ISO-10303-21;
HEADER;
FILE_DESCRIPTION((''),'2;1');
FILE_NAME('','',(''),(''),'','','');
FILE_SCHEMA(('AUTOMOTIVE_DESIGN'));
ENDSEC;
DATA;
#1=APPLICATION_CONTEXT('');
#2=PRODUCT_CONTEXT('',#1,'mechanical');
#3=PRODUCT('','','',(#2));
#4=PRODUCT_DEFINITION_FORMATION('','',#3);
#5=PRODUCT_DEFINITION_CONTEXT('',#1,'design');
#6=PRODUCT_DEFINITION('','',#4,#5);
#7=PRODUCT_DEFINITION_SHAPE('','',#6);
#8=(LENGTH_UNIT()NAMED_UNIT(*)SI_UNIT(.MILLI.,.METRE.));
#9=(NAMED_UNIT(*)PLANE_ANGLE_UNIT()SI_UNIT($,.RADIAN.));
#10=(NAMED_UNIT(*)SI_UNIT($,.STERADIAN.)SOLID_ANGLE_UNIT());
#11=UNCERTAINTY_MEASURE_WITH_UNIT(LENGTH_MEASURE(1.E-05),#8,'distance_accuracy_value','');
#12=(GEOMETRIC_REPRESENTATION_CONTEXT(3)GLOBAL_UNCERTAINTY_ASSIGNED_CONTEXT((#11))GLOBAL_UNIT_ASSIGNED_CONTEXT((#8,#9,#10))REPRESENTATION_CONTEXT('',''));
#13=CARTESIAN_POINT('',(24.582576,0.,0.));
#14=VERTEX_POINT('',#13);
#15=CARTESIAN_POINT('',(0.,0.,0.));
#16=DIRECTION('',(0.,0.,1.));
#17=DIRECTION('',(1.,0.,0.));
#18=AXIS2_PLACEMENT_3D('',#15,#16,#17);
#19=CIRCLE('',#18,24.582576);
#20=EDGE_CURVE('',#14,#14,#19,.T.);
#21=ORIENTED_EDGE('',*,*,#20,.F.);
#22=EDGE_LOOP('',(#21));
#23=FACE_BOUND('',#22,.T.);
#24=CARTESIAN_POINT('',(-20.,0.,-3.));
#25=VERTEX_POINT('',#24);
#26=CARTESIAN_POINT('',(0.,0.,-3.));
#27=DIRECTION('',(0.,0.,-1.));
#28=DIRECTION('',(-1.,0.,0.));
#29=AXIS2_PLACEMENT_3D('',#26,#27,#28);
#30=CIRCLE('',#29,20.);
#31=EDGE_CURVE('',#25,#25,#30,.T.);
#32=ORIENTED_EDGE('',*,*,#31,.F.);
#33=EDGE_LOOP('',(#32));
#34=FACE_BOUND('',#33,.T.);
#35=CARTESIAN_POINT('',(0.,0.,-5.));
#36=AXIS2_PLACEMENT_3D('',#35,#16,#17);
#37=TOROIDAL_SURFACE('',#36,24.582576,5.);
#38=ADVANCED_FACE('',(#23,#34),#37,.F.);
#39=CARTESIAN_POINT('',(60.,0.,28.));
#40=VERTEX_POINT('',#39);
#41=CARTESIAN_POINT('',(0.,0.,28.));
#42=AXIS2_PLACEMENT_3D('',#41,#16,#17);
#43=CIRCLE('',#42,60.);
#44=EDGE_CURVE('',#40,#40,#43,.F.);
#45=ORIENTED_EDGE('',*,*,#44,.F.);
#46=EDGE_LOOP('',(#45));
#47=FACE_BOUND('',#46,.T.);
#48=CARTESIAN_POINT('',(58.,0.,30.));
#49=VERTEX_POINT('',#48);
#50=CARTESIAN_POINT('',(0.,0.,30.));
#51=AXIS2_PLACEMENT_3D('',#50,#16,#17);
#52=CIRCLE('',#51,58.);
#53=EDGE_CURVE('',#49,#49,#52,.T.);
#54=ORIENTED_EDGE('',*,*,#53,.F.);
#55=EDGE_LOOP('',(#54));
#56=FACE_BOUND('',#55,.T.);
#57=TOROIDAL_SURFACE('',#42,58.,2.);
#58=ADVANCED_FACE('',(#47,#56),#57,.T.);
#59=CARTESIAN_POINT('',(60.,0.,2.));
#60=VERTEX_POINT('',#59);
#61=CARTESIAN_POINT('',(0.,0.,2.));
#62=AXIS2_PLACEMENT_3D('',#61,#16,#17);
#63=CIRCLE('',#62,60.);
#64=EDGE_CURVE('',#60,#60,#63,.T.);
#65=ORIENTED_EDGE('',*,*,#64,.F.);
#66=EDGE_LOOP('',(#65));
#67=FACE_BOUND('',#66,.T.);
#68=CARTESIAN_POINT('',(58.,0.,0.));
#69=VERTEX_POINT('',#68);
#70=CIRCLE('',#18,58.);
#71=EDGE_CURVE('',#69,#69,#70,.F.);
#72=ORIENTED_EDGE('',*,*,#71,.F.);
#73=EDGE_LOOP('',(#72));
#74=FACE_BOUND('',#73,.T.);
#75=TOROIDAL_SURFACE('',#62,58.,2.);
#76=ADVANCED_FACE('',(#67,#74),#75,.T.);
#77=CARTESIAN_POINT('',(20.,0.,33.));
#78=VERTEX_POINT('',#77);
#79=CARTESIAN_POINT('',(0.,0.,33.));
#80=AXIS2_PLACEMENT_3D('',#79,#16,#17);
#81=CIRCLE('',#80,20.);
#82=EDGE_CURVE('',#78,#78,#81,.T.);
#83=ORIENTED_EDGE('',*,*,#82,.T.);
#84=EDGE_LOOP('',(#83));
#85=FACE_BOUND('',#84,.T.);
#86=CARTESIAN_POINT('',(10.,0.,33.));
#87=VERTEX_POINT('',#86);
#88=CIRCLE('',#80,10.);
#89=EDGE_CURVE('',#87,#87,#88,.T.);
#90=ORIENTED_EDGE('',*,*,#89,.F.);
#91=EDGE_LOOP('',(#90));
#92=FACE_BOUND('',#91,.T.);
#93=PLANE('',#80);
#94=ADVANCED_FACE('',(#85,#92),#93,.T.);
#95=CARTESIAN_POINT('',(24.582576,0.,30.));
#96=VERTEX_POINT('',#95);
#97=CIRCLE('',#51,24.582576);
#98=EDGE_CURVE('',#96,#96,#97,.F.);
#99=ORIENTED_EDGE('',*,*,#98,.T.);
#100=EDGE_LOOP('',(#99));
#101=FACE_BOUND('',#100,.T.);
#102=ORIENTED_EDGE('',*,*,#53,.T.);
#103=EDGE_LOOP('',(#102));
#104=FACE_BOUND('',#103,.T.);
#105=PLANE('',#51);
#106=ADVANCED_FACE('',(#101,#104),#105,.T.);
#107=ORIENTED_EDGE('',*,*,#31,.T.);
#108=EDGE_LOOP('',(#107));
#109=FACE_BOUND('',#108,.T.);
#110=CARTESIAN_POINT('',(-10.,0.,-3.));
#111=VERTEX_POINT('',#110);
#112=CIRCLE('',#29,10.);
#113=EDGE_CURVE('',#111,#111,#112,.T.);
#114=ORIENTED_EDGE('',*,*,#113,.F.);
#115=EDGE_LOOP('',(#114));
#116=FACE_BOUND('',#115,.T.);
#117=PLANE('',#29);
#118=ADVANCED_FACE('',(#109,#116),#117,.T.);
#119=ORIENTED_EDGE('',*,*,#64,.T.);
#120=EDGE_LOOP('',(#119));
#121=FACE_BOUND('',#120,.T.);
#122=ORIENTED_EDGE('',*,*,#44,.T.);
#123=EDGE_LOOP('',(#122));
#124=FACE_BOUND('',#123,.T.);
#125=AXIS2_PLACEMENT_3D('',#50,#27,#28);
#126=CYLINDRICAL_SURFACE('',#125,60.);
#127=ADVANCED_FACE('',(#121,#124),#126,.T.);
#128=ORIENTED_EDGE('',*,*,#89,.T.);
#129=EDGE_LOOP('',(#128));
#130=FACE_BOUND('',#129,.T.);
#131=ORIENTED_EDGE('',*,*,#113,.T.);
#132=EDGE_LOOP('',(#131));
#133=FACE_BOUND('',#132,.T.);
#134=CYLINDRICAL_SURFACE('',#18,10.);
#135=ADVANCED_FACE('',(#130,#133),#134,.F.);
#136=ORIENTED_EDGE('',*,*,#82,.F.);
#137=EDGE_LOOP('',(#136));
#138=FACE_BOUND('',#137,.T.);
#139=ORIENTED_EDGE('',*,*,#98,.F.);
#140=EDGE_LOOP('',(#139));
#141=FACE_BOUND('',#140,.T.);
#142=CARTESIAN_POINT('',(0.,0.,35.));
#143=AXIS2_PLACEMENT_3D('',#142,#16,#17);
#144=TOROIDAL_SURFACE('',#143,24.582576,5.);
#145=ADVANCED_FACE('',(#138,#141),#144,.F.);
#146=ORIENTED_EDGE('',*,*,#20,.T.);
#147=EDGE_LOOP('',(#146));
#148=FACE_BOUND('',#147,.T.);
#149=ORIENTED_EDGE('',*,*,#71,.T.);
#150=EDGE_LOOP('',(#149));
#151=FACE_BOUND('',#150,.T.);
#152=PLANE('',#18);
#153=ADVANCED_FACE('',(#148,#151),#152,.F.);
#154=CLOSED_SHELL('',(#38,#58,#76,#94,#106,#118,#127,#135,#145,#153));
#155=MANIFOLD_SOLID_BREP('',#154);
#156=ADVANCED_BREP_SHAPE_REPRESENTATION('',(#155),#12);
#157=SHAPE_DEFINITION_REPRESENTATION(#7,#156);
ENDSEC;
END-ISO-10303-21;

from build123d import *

# Parameters (mm, degrees)
SKETCH1_R           = 60
BOSS_EXTRUDE1_DEPTH = 30
FILLET1_R           = 2
SKETCH6_R           = 20
BOSS_EXTRUDE6_DEPTH = 3
SKETCH9_R           = 10
CUT_EXTRUDE3_DEPTH  = 92.043945535
FILLET4_R           = 5
SKETCH12_R          = 20
BOSS_EXTRUDE9_DEPTH = 3
FILLET7_R           = 5
SKETCH14_R          = 10
CUT_EXTRUDE5_DEPTH  = 93.17374904


with BuildPart() as part:
    # Sketch1 → Boss-Extrude1 (new body)
    with BuildSketch(Plane.XY):
        Circle(SKETCH1_R)
    extrude(amount=BOSS_EXTRUDE1_DEPTH)

    # Fillet1
    fillet1_edges = [part.edges().sort_by_distance(p)[0] for p in [
        (-60, 0, 0),
        (-60, 0, 30),
    ]]
    fillet(fillet1_edges, radius=FILLET1_R)

    # Sketch6 → Boss-Extrude6 (add)
    with BuildSketch(Plane.XY.offset(30)):
        Circle(SKETCH6_R)
    extrude(amount=BOSS_EXTRUDE6_DEPTH)

    # Sketch9 → Cut-Extrude3 (cut, through all)
    with BuildSketch(Plane.XY.offset(33)):
        Circle(SKETCH9_R)
    extrude(amount=-CUT_EXTRUDE3_DEPTH, mode=Mode.SUBTRACT)

    # Fillet4
    # the kernel refuses this fillet: 5 mm, written as the material it adds along each edge
    with BuildSketch(Plane(origin=(0, 0, 30), x_dir=(1, 0, 0), z_dir=(0, -1, 0))) as fillet4_piece_1:
        with BuildLine():
            CenterArc((24.582575695, 5), FILLET4_R, 203.578178478, 66.421821522)
            Line((20, 3), (19.908348486, 2.96))
            ThreePointArc((19.908348486, 2.96), (19.9, 1.5), (19.9, 0))
            Line((19.9, 0), (20, -0.1))
            Line((20, -0.1), (24.582575695, -0.1))
            Line((24.582575695, -0.1), (24.582575695, 0))
        make_face()
    revolve(axis=Axis((0, 0, 30), (0, 0, 1)))

    # Sketch12 → Boss-Extrude9 (add)
    with BuildSketch(Plane(origin=(0, 0, 0), x_dir=(-1, 0, 0), z_dir=(0, 0, -1))):
        with Locations(Location((0, 0, 0), (0, 0, 180))):
            Circle(SKETCH12_R)
    extrude(amount=BOSS_EXTRUDE9_DEPTH)

    # Fillet7
    # the kernel refuses this fillet: 5 mm, written as the material it adds along each edge
    with BuildSketch(Plane(origin=(0, 0, 0), x_dir=(1, 0, 0), z_dir=(0, 1, 0))) as fillet7_piece_1:
        with BuildLine():
            CenterArc((24.582575695, 5), FILLET7_R, 203.578178478, 66.421821522)
            Line((20, 3), (19.908348486, 2.96))
            ThreePointArc((19.908348486, 2.96), (19.9, 1.5), (19.9, 0))
            Line((19.9, 0), (20, -0.1))
            Line((20, -0.1), (24.582575695, -0.1))
            Line((24.582575695, -0.1), (24.582575695, 0))
        make_face()
    revolve(axis=Axis((0, 0, 0), (0, 0, -1)))

    # Sketch14 → Cut-Extrude5 (cut, through all)
    with BuildSketch(Plane(origin=(0, 0, -3), x_dir=(-1, 0, 0), z_dir=(0, 0, -1))):
        with Locations(Location((0, 0, 0), (0, 0, 180))):
            Circle(SKETCH14_R)
    extrude(amount=-CUT_EXTRUDE5_DEPTH, mode=Mode.SUBTRACT)


solid = part.part
